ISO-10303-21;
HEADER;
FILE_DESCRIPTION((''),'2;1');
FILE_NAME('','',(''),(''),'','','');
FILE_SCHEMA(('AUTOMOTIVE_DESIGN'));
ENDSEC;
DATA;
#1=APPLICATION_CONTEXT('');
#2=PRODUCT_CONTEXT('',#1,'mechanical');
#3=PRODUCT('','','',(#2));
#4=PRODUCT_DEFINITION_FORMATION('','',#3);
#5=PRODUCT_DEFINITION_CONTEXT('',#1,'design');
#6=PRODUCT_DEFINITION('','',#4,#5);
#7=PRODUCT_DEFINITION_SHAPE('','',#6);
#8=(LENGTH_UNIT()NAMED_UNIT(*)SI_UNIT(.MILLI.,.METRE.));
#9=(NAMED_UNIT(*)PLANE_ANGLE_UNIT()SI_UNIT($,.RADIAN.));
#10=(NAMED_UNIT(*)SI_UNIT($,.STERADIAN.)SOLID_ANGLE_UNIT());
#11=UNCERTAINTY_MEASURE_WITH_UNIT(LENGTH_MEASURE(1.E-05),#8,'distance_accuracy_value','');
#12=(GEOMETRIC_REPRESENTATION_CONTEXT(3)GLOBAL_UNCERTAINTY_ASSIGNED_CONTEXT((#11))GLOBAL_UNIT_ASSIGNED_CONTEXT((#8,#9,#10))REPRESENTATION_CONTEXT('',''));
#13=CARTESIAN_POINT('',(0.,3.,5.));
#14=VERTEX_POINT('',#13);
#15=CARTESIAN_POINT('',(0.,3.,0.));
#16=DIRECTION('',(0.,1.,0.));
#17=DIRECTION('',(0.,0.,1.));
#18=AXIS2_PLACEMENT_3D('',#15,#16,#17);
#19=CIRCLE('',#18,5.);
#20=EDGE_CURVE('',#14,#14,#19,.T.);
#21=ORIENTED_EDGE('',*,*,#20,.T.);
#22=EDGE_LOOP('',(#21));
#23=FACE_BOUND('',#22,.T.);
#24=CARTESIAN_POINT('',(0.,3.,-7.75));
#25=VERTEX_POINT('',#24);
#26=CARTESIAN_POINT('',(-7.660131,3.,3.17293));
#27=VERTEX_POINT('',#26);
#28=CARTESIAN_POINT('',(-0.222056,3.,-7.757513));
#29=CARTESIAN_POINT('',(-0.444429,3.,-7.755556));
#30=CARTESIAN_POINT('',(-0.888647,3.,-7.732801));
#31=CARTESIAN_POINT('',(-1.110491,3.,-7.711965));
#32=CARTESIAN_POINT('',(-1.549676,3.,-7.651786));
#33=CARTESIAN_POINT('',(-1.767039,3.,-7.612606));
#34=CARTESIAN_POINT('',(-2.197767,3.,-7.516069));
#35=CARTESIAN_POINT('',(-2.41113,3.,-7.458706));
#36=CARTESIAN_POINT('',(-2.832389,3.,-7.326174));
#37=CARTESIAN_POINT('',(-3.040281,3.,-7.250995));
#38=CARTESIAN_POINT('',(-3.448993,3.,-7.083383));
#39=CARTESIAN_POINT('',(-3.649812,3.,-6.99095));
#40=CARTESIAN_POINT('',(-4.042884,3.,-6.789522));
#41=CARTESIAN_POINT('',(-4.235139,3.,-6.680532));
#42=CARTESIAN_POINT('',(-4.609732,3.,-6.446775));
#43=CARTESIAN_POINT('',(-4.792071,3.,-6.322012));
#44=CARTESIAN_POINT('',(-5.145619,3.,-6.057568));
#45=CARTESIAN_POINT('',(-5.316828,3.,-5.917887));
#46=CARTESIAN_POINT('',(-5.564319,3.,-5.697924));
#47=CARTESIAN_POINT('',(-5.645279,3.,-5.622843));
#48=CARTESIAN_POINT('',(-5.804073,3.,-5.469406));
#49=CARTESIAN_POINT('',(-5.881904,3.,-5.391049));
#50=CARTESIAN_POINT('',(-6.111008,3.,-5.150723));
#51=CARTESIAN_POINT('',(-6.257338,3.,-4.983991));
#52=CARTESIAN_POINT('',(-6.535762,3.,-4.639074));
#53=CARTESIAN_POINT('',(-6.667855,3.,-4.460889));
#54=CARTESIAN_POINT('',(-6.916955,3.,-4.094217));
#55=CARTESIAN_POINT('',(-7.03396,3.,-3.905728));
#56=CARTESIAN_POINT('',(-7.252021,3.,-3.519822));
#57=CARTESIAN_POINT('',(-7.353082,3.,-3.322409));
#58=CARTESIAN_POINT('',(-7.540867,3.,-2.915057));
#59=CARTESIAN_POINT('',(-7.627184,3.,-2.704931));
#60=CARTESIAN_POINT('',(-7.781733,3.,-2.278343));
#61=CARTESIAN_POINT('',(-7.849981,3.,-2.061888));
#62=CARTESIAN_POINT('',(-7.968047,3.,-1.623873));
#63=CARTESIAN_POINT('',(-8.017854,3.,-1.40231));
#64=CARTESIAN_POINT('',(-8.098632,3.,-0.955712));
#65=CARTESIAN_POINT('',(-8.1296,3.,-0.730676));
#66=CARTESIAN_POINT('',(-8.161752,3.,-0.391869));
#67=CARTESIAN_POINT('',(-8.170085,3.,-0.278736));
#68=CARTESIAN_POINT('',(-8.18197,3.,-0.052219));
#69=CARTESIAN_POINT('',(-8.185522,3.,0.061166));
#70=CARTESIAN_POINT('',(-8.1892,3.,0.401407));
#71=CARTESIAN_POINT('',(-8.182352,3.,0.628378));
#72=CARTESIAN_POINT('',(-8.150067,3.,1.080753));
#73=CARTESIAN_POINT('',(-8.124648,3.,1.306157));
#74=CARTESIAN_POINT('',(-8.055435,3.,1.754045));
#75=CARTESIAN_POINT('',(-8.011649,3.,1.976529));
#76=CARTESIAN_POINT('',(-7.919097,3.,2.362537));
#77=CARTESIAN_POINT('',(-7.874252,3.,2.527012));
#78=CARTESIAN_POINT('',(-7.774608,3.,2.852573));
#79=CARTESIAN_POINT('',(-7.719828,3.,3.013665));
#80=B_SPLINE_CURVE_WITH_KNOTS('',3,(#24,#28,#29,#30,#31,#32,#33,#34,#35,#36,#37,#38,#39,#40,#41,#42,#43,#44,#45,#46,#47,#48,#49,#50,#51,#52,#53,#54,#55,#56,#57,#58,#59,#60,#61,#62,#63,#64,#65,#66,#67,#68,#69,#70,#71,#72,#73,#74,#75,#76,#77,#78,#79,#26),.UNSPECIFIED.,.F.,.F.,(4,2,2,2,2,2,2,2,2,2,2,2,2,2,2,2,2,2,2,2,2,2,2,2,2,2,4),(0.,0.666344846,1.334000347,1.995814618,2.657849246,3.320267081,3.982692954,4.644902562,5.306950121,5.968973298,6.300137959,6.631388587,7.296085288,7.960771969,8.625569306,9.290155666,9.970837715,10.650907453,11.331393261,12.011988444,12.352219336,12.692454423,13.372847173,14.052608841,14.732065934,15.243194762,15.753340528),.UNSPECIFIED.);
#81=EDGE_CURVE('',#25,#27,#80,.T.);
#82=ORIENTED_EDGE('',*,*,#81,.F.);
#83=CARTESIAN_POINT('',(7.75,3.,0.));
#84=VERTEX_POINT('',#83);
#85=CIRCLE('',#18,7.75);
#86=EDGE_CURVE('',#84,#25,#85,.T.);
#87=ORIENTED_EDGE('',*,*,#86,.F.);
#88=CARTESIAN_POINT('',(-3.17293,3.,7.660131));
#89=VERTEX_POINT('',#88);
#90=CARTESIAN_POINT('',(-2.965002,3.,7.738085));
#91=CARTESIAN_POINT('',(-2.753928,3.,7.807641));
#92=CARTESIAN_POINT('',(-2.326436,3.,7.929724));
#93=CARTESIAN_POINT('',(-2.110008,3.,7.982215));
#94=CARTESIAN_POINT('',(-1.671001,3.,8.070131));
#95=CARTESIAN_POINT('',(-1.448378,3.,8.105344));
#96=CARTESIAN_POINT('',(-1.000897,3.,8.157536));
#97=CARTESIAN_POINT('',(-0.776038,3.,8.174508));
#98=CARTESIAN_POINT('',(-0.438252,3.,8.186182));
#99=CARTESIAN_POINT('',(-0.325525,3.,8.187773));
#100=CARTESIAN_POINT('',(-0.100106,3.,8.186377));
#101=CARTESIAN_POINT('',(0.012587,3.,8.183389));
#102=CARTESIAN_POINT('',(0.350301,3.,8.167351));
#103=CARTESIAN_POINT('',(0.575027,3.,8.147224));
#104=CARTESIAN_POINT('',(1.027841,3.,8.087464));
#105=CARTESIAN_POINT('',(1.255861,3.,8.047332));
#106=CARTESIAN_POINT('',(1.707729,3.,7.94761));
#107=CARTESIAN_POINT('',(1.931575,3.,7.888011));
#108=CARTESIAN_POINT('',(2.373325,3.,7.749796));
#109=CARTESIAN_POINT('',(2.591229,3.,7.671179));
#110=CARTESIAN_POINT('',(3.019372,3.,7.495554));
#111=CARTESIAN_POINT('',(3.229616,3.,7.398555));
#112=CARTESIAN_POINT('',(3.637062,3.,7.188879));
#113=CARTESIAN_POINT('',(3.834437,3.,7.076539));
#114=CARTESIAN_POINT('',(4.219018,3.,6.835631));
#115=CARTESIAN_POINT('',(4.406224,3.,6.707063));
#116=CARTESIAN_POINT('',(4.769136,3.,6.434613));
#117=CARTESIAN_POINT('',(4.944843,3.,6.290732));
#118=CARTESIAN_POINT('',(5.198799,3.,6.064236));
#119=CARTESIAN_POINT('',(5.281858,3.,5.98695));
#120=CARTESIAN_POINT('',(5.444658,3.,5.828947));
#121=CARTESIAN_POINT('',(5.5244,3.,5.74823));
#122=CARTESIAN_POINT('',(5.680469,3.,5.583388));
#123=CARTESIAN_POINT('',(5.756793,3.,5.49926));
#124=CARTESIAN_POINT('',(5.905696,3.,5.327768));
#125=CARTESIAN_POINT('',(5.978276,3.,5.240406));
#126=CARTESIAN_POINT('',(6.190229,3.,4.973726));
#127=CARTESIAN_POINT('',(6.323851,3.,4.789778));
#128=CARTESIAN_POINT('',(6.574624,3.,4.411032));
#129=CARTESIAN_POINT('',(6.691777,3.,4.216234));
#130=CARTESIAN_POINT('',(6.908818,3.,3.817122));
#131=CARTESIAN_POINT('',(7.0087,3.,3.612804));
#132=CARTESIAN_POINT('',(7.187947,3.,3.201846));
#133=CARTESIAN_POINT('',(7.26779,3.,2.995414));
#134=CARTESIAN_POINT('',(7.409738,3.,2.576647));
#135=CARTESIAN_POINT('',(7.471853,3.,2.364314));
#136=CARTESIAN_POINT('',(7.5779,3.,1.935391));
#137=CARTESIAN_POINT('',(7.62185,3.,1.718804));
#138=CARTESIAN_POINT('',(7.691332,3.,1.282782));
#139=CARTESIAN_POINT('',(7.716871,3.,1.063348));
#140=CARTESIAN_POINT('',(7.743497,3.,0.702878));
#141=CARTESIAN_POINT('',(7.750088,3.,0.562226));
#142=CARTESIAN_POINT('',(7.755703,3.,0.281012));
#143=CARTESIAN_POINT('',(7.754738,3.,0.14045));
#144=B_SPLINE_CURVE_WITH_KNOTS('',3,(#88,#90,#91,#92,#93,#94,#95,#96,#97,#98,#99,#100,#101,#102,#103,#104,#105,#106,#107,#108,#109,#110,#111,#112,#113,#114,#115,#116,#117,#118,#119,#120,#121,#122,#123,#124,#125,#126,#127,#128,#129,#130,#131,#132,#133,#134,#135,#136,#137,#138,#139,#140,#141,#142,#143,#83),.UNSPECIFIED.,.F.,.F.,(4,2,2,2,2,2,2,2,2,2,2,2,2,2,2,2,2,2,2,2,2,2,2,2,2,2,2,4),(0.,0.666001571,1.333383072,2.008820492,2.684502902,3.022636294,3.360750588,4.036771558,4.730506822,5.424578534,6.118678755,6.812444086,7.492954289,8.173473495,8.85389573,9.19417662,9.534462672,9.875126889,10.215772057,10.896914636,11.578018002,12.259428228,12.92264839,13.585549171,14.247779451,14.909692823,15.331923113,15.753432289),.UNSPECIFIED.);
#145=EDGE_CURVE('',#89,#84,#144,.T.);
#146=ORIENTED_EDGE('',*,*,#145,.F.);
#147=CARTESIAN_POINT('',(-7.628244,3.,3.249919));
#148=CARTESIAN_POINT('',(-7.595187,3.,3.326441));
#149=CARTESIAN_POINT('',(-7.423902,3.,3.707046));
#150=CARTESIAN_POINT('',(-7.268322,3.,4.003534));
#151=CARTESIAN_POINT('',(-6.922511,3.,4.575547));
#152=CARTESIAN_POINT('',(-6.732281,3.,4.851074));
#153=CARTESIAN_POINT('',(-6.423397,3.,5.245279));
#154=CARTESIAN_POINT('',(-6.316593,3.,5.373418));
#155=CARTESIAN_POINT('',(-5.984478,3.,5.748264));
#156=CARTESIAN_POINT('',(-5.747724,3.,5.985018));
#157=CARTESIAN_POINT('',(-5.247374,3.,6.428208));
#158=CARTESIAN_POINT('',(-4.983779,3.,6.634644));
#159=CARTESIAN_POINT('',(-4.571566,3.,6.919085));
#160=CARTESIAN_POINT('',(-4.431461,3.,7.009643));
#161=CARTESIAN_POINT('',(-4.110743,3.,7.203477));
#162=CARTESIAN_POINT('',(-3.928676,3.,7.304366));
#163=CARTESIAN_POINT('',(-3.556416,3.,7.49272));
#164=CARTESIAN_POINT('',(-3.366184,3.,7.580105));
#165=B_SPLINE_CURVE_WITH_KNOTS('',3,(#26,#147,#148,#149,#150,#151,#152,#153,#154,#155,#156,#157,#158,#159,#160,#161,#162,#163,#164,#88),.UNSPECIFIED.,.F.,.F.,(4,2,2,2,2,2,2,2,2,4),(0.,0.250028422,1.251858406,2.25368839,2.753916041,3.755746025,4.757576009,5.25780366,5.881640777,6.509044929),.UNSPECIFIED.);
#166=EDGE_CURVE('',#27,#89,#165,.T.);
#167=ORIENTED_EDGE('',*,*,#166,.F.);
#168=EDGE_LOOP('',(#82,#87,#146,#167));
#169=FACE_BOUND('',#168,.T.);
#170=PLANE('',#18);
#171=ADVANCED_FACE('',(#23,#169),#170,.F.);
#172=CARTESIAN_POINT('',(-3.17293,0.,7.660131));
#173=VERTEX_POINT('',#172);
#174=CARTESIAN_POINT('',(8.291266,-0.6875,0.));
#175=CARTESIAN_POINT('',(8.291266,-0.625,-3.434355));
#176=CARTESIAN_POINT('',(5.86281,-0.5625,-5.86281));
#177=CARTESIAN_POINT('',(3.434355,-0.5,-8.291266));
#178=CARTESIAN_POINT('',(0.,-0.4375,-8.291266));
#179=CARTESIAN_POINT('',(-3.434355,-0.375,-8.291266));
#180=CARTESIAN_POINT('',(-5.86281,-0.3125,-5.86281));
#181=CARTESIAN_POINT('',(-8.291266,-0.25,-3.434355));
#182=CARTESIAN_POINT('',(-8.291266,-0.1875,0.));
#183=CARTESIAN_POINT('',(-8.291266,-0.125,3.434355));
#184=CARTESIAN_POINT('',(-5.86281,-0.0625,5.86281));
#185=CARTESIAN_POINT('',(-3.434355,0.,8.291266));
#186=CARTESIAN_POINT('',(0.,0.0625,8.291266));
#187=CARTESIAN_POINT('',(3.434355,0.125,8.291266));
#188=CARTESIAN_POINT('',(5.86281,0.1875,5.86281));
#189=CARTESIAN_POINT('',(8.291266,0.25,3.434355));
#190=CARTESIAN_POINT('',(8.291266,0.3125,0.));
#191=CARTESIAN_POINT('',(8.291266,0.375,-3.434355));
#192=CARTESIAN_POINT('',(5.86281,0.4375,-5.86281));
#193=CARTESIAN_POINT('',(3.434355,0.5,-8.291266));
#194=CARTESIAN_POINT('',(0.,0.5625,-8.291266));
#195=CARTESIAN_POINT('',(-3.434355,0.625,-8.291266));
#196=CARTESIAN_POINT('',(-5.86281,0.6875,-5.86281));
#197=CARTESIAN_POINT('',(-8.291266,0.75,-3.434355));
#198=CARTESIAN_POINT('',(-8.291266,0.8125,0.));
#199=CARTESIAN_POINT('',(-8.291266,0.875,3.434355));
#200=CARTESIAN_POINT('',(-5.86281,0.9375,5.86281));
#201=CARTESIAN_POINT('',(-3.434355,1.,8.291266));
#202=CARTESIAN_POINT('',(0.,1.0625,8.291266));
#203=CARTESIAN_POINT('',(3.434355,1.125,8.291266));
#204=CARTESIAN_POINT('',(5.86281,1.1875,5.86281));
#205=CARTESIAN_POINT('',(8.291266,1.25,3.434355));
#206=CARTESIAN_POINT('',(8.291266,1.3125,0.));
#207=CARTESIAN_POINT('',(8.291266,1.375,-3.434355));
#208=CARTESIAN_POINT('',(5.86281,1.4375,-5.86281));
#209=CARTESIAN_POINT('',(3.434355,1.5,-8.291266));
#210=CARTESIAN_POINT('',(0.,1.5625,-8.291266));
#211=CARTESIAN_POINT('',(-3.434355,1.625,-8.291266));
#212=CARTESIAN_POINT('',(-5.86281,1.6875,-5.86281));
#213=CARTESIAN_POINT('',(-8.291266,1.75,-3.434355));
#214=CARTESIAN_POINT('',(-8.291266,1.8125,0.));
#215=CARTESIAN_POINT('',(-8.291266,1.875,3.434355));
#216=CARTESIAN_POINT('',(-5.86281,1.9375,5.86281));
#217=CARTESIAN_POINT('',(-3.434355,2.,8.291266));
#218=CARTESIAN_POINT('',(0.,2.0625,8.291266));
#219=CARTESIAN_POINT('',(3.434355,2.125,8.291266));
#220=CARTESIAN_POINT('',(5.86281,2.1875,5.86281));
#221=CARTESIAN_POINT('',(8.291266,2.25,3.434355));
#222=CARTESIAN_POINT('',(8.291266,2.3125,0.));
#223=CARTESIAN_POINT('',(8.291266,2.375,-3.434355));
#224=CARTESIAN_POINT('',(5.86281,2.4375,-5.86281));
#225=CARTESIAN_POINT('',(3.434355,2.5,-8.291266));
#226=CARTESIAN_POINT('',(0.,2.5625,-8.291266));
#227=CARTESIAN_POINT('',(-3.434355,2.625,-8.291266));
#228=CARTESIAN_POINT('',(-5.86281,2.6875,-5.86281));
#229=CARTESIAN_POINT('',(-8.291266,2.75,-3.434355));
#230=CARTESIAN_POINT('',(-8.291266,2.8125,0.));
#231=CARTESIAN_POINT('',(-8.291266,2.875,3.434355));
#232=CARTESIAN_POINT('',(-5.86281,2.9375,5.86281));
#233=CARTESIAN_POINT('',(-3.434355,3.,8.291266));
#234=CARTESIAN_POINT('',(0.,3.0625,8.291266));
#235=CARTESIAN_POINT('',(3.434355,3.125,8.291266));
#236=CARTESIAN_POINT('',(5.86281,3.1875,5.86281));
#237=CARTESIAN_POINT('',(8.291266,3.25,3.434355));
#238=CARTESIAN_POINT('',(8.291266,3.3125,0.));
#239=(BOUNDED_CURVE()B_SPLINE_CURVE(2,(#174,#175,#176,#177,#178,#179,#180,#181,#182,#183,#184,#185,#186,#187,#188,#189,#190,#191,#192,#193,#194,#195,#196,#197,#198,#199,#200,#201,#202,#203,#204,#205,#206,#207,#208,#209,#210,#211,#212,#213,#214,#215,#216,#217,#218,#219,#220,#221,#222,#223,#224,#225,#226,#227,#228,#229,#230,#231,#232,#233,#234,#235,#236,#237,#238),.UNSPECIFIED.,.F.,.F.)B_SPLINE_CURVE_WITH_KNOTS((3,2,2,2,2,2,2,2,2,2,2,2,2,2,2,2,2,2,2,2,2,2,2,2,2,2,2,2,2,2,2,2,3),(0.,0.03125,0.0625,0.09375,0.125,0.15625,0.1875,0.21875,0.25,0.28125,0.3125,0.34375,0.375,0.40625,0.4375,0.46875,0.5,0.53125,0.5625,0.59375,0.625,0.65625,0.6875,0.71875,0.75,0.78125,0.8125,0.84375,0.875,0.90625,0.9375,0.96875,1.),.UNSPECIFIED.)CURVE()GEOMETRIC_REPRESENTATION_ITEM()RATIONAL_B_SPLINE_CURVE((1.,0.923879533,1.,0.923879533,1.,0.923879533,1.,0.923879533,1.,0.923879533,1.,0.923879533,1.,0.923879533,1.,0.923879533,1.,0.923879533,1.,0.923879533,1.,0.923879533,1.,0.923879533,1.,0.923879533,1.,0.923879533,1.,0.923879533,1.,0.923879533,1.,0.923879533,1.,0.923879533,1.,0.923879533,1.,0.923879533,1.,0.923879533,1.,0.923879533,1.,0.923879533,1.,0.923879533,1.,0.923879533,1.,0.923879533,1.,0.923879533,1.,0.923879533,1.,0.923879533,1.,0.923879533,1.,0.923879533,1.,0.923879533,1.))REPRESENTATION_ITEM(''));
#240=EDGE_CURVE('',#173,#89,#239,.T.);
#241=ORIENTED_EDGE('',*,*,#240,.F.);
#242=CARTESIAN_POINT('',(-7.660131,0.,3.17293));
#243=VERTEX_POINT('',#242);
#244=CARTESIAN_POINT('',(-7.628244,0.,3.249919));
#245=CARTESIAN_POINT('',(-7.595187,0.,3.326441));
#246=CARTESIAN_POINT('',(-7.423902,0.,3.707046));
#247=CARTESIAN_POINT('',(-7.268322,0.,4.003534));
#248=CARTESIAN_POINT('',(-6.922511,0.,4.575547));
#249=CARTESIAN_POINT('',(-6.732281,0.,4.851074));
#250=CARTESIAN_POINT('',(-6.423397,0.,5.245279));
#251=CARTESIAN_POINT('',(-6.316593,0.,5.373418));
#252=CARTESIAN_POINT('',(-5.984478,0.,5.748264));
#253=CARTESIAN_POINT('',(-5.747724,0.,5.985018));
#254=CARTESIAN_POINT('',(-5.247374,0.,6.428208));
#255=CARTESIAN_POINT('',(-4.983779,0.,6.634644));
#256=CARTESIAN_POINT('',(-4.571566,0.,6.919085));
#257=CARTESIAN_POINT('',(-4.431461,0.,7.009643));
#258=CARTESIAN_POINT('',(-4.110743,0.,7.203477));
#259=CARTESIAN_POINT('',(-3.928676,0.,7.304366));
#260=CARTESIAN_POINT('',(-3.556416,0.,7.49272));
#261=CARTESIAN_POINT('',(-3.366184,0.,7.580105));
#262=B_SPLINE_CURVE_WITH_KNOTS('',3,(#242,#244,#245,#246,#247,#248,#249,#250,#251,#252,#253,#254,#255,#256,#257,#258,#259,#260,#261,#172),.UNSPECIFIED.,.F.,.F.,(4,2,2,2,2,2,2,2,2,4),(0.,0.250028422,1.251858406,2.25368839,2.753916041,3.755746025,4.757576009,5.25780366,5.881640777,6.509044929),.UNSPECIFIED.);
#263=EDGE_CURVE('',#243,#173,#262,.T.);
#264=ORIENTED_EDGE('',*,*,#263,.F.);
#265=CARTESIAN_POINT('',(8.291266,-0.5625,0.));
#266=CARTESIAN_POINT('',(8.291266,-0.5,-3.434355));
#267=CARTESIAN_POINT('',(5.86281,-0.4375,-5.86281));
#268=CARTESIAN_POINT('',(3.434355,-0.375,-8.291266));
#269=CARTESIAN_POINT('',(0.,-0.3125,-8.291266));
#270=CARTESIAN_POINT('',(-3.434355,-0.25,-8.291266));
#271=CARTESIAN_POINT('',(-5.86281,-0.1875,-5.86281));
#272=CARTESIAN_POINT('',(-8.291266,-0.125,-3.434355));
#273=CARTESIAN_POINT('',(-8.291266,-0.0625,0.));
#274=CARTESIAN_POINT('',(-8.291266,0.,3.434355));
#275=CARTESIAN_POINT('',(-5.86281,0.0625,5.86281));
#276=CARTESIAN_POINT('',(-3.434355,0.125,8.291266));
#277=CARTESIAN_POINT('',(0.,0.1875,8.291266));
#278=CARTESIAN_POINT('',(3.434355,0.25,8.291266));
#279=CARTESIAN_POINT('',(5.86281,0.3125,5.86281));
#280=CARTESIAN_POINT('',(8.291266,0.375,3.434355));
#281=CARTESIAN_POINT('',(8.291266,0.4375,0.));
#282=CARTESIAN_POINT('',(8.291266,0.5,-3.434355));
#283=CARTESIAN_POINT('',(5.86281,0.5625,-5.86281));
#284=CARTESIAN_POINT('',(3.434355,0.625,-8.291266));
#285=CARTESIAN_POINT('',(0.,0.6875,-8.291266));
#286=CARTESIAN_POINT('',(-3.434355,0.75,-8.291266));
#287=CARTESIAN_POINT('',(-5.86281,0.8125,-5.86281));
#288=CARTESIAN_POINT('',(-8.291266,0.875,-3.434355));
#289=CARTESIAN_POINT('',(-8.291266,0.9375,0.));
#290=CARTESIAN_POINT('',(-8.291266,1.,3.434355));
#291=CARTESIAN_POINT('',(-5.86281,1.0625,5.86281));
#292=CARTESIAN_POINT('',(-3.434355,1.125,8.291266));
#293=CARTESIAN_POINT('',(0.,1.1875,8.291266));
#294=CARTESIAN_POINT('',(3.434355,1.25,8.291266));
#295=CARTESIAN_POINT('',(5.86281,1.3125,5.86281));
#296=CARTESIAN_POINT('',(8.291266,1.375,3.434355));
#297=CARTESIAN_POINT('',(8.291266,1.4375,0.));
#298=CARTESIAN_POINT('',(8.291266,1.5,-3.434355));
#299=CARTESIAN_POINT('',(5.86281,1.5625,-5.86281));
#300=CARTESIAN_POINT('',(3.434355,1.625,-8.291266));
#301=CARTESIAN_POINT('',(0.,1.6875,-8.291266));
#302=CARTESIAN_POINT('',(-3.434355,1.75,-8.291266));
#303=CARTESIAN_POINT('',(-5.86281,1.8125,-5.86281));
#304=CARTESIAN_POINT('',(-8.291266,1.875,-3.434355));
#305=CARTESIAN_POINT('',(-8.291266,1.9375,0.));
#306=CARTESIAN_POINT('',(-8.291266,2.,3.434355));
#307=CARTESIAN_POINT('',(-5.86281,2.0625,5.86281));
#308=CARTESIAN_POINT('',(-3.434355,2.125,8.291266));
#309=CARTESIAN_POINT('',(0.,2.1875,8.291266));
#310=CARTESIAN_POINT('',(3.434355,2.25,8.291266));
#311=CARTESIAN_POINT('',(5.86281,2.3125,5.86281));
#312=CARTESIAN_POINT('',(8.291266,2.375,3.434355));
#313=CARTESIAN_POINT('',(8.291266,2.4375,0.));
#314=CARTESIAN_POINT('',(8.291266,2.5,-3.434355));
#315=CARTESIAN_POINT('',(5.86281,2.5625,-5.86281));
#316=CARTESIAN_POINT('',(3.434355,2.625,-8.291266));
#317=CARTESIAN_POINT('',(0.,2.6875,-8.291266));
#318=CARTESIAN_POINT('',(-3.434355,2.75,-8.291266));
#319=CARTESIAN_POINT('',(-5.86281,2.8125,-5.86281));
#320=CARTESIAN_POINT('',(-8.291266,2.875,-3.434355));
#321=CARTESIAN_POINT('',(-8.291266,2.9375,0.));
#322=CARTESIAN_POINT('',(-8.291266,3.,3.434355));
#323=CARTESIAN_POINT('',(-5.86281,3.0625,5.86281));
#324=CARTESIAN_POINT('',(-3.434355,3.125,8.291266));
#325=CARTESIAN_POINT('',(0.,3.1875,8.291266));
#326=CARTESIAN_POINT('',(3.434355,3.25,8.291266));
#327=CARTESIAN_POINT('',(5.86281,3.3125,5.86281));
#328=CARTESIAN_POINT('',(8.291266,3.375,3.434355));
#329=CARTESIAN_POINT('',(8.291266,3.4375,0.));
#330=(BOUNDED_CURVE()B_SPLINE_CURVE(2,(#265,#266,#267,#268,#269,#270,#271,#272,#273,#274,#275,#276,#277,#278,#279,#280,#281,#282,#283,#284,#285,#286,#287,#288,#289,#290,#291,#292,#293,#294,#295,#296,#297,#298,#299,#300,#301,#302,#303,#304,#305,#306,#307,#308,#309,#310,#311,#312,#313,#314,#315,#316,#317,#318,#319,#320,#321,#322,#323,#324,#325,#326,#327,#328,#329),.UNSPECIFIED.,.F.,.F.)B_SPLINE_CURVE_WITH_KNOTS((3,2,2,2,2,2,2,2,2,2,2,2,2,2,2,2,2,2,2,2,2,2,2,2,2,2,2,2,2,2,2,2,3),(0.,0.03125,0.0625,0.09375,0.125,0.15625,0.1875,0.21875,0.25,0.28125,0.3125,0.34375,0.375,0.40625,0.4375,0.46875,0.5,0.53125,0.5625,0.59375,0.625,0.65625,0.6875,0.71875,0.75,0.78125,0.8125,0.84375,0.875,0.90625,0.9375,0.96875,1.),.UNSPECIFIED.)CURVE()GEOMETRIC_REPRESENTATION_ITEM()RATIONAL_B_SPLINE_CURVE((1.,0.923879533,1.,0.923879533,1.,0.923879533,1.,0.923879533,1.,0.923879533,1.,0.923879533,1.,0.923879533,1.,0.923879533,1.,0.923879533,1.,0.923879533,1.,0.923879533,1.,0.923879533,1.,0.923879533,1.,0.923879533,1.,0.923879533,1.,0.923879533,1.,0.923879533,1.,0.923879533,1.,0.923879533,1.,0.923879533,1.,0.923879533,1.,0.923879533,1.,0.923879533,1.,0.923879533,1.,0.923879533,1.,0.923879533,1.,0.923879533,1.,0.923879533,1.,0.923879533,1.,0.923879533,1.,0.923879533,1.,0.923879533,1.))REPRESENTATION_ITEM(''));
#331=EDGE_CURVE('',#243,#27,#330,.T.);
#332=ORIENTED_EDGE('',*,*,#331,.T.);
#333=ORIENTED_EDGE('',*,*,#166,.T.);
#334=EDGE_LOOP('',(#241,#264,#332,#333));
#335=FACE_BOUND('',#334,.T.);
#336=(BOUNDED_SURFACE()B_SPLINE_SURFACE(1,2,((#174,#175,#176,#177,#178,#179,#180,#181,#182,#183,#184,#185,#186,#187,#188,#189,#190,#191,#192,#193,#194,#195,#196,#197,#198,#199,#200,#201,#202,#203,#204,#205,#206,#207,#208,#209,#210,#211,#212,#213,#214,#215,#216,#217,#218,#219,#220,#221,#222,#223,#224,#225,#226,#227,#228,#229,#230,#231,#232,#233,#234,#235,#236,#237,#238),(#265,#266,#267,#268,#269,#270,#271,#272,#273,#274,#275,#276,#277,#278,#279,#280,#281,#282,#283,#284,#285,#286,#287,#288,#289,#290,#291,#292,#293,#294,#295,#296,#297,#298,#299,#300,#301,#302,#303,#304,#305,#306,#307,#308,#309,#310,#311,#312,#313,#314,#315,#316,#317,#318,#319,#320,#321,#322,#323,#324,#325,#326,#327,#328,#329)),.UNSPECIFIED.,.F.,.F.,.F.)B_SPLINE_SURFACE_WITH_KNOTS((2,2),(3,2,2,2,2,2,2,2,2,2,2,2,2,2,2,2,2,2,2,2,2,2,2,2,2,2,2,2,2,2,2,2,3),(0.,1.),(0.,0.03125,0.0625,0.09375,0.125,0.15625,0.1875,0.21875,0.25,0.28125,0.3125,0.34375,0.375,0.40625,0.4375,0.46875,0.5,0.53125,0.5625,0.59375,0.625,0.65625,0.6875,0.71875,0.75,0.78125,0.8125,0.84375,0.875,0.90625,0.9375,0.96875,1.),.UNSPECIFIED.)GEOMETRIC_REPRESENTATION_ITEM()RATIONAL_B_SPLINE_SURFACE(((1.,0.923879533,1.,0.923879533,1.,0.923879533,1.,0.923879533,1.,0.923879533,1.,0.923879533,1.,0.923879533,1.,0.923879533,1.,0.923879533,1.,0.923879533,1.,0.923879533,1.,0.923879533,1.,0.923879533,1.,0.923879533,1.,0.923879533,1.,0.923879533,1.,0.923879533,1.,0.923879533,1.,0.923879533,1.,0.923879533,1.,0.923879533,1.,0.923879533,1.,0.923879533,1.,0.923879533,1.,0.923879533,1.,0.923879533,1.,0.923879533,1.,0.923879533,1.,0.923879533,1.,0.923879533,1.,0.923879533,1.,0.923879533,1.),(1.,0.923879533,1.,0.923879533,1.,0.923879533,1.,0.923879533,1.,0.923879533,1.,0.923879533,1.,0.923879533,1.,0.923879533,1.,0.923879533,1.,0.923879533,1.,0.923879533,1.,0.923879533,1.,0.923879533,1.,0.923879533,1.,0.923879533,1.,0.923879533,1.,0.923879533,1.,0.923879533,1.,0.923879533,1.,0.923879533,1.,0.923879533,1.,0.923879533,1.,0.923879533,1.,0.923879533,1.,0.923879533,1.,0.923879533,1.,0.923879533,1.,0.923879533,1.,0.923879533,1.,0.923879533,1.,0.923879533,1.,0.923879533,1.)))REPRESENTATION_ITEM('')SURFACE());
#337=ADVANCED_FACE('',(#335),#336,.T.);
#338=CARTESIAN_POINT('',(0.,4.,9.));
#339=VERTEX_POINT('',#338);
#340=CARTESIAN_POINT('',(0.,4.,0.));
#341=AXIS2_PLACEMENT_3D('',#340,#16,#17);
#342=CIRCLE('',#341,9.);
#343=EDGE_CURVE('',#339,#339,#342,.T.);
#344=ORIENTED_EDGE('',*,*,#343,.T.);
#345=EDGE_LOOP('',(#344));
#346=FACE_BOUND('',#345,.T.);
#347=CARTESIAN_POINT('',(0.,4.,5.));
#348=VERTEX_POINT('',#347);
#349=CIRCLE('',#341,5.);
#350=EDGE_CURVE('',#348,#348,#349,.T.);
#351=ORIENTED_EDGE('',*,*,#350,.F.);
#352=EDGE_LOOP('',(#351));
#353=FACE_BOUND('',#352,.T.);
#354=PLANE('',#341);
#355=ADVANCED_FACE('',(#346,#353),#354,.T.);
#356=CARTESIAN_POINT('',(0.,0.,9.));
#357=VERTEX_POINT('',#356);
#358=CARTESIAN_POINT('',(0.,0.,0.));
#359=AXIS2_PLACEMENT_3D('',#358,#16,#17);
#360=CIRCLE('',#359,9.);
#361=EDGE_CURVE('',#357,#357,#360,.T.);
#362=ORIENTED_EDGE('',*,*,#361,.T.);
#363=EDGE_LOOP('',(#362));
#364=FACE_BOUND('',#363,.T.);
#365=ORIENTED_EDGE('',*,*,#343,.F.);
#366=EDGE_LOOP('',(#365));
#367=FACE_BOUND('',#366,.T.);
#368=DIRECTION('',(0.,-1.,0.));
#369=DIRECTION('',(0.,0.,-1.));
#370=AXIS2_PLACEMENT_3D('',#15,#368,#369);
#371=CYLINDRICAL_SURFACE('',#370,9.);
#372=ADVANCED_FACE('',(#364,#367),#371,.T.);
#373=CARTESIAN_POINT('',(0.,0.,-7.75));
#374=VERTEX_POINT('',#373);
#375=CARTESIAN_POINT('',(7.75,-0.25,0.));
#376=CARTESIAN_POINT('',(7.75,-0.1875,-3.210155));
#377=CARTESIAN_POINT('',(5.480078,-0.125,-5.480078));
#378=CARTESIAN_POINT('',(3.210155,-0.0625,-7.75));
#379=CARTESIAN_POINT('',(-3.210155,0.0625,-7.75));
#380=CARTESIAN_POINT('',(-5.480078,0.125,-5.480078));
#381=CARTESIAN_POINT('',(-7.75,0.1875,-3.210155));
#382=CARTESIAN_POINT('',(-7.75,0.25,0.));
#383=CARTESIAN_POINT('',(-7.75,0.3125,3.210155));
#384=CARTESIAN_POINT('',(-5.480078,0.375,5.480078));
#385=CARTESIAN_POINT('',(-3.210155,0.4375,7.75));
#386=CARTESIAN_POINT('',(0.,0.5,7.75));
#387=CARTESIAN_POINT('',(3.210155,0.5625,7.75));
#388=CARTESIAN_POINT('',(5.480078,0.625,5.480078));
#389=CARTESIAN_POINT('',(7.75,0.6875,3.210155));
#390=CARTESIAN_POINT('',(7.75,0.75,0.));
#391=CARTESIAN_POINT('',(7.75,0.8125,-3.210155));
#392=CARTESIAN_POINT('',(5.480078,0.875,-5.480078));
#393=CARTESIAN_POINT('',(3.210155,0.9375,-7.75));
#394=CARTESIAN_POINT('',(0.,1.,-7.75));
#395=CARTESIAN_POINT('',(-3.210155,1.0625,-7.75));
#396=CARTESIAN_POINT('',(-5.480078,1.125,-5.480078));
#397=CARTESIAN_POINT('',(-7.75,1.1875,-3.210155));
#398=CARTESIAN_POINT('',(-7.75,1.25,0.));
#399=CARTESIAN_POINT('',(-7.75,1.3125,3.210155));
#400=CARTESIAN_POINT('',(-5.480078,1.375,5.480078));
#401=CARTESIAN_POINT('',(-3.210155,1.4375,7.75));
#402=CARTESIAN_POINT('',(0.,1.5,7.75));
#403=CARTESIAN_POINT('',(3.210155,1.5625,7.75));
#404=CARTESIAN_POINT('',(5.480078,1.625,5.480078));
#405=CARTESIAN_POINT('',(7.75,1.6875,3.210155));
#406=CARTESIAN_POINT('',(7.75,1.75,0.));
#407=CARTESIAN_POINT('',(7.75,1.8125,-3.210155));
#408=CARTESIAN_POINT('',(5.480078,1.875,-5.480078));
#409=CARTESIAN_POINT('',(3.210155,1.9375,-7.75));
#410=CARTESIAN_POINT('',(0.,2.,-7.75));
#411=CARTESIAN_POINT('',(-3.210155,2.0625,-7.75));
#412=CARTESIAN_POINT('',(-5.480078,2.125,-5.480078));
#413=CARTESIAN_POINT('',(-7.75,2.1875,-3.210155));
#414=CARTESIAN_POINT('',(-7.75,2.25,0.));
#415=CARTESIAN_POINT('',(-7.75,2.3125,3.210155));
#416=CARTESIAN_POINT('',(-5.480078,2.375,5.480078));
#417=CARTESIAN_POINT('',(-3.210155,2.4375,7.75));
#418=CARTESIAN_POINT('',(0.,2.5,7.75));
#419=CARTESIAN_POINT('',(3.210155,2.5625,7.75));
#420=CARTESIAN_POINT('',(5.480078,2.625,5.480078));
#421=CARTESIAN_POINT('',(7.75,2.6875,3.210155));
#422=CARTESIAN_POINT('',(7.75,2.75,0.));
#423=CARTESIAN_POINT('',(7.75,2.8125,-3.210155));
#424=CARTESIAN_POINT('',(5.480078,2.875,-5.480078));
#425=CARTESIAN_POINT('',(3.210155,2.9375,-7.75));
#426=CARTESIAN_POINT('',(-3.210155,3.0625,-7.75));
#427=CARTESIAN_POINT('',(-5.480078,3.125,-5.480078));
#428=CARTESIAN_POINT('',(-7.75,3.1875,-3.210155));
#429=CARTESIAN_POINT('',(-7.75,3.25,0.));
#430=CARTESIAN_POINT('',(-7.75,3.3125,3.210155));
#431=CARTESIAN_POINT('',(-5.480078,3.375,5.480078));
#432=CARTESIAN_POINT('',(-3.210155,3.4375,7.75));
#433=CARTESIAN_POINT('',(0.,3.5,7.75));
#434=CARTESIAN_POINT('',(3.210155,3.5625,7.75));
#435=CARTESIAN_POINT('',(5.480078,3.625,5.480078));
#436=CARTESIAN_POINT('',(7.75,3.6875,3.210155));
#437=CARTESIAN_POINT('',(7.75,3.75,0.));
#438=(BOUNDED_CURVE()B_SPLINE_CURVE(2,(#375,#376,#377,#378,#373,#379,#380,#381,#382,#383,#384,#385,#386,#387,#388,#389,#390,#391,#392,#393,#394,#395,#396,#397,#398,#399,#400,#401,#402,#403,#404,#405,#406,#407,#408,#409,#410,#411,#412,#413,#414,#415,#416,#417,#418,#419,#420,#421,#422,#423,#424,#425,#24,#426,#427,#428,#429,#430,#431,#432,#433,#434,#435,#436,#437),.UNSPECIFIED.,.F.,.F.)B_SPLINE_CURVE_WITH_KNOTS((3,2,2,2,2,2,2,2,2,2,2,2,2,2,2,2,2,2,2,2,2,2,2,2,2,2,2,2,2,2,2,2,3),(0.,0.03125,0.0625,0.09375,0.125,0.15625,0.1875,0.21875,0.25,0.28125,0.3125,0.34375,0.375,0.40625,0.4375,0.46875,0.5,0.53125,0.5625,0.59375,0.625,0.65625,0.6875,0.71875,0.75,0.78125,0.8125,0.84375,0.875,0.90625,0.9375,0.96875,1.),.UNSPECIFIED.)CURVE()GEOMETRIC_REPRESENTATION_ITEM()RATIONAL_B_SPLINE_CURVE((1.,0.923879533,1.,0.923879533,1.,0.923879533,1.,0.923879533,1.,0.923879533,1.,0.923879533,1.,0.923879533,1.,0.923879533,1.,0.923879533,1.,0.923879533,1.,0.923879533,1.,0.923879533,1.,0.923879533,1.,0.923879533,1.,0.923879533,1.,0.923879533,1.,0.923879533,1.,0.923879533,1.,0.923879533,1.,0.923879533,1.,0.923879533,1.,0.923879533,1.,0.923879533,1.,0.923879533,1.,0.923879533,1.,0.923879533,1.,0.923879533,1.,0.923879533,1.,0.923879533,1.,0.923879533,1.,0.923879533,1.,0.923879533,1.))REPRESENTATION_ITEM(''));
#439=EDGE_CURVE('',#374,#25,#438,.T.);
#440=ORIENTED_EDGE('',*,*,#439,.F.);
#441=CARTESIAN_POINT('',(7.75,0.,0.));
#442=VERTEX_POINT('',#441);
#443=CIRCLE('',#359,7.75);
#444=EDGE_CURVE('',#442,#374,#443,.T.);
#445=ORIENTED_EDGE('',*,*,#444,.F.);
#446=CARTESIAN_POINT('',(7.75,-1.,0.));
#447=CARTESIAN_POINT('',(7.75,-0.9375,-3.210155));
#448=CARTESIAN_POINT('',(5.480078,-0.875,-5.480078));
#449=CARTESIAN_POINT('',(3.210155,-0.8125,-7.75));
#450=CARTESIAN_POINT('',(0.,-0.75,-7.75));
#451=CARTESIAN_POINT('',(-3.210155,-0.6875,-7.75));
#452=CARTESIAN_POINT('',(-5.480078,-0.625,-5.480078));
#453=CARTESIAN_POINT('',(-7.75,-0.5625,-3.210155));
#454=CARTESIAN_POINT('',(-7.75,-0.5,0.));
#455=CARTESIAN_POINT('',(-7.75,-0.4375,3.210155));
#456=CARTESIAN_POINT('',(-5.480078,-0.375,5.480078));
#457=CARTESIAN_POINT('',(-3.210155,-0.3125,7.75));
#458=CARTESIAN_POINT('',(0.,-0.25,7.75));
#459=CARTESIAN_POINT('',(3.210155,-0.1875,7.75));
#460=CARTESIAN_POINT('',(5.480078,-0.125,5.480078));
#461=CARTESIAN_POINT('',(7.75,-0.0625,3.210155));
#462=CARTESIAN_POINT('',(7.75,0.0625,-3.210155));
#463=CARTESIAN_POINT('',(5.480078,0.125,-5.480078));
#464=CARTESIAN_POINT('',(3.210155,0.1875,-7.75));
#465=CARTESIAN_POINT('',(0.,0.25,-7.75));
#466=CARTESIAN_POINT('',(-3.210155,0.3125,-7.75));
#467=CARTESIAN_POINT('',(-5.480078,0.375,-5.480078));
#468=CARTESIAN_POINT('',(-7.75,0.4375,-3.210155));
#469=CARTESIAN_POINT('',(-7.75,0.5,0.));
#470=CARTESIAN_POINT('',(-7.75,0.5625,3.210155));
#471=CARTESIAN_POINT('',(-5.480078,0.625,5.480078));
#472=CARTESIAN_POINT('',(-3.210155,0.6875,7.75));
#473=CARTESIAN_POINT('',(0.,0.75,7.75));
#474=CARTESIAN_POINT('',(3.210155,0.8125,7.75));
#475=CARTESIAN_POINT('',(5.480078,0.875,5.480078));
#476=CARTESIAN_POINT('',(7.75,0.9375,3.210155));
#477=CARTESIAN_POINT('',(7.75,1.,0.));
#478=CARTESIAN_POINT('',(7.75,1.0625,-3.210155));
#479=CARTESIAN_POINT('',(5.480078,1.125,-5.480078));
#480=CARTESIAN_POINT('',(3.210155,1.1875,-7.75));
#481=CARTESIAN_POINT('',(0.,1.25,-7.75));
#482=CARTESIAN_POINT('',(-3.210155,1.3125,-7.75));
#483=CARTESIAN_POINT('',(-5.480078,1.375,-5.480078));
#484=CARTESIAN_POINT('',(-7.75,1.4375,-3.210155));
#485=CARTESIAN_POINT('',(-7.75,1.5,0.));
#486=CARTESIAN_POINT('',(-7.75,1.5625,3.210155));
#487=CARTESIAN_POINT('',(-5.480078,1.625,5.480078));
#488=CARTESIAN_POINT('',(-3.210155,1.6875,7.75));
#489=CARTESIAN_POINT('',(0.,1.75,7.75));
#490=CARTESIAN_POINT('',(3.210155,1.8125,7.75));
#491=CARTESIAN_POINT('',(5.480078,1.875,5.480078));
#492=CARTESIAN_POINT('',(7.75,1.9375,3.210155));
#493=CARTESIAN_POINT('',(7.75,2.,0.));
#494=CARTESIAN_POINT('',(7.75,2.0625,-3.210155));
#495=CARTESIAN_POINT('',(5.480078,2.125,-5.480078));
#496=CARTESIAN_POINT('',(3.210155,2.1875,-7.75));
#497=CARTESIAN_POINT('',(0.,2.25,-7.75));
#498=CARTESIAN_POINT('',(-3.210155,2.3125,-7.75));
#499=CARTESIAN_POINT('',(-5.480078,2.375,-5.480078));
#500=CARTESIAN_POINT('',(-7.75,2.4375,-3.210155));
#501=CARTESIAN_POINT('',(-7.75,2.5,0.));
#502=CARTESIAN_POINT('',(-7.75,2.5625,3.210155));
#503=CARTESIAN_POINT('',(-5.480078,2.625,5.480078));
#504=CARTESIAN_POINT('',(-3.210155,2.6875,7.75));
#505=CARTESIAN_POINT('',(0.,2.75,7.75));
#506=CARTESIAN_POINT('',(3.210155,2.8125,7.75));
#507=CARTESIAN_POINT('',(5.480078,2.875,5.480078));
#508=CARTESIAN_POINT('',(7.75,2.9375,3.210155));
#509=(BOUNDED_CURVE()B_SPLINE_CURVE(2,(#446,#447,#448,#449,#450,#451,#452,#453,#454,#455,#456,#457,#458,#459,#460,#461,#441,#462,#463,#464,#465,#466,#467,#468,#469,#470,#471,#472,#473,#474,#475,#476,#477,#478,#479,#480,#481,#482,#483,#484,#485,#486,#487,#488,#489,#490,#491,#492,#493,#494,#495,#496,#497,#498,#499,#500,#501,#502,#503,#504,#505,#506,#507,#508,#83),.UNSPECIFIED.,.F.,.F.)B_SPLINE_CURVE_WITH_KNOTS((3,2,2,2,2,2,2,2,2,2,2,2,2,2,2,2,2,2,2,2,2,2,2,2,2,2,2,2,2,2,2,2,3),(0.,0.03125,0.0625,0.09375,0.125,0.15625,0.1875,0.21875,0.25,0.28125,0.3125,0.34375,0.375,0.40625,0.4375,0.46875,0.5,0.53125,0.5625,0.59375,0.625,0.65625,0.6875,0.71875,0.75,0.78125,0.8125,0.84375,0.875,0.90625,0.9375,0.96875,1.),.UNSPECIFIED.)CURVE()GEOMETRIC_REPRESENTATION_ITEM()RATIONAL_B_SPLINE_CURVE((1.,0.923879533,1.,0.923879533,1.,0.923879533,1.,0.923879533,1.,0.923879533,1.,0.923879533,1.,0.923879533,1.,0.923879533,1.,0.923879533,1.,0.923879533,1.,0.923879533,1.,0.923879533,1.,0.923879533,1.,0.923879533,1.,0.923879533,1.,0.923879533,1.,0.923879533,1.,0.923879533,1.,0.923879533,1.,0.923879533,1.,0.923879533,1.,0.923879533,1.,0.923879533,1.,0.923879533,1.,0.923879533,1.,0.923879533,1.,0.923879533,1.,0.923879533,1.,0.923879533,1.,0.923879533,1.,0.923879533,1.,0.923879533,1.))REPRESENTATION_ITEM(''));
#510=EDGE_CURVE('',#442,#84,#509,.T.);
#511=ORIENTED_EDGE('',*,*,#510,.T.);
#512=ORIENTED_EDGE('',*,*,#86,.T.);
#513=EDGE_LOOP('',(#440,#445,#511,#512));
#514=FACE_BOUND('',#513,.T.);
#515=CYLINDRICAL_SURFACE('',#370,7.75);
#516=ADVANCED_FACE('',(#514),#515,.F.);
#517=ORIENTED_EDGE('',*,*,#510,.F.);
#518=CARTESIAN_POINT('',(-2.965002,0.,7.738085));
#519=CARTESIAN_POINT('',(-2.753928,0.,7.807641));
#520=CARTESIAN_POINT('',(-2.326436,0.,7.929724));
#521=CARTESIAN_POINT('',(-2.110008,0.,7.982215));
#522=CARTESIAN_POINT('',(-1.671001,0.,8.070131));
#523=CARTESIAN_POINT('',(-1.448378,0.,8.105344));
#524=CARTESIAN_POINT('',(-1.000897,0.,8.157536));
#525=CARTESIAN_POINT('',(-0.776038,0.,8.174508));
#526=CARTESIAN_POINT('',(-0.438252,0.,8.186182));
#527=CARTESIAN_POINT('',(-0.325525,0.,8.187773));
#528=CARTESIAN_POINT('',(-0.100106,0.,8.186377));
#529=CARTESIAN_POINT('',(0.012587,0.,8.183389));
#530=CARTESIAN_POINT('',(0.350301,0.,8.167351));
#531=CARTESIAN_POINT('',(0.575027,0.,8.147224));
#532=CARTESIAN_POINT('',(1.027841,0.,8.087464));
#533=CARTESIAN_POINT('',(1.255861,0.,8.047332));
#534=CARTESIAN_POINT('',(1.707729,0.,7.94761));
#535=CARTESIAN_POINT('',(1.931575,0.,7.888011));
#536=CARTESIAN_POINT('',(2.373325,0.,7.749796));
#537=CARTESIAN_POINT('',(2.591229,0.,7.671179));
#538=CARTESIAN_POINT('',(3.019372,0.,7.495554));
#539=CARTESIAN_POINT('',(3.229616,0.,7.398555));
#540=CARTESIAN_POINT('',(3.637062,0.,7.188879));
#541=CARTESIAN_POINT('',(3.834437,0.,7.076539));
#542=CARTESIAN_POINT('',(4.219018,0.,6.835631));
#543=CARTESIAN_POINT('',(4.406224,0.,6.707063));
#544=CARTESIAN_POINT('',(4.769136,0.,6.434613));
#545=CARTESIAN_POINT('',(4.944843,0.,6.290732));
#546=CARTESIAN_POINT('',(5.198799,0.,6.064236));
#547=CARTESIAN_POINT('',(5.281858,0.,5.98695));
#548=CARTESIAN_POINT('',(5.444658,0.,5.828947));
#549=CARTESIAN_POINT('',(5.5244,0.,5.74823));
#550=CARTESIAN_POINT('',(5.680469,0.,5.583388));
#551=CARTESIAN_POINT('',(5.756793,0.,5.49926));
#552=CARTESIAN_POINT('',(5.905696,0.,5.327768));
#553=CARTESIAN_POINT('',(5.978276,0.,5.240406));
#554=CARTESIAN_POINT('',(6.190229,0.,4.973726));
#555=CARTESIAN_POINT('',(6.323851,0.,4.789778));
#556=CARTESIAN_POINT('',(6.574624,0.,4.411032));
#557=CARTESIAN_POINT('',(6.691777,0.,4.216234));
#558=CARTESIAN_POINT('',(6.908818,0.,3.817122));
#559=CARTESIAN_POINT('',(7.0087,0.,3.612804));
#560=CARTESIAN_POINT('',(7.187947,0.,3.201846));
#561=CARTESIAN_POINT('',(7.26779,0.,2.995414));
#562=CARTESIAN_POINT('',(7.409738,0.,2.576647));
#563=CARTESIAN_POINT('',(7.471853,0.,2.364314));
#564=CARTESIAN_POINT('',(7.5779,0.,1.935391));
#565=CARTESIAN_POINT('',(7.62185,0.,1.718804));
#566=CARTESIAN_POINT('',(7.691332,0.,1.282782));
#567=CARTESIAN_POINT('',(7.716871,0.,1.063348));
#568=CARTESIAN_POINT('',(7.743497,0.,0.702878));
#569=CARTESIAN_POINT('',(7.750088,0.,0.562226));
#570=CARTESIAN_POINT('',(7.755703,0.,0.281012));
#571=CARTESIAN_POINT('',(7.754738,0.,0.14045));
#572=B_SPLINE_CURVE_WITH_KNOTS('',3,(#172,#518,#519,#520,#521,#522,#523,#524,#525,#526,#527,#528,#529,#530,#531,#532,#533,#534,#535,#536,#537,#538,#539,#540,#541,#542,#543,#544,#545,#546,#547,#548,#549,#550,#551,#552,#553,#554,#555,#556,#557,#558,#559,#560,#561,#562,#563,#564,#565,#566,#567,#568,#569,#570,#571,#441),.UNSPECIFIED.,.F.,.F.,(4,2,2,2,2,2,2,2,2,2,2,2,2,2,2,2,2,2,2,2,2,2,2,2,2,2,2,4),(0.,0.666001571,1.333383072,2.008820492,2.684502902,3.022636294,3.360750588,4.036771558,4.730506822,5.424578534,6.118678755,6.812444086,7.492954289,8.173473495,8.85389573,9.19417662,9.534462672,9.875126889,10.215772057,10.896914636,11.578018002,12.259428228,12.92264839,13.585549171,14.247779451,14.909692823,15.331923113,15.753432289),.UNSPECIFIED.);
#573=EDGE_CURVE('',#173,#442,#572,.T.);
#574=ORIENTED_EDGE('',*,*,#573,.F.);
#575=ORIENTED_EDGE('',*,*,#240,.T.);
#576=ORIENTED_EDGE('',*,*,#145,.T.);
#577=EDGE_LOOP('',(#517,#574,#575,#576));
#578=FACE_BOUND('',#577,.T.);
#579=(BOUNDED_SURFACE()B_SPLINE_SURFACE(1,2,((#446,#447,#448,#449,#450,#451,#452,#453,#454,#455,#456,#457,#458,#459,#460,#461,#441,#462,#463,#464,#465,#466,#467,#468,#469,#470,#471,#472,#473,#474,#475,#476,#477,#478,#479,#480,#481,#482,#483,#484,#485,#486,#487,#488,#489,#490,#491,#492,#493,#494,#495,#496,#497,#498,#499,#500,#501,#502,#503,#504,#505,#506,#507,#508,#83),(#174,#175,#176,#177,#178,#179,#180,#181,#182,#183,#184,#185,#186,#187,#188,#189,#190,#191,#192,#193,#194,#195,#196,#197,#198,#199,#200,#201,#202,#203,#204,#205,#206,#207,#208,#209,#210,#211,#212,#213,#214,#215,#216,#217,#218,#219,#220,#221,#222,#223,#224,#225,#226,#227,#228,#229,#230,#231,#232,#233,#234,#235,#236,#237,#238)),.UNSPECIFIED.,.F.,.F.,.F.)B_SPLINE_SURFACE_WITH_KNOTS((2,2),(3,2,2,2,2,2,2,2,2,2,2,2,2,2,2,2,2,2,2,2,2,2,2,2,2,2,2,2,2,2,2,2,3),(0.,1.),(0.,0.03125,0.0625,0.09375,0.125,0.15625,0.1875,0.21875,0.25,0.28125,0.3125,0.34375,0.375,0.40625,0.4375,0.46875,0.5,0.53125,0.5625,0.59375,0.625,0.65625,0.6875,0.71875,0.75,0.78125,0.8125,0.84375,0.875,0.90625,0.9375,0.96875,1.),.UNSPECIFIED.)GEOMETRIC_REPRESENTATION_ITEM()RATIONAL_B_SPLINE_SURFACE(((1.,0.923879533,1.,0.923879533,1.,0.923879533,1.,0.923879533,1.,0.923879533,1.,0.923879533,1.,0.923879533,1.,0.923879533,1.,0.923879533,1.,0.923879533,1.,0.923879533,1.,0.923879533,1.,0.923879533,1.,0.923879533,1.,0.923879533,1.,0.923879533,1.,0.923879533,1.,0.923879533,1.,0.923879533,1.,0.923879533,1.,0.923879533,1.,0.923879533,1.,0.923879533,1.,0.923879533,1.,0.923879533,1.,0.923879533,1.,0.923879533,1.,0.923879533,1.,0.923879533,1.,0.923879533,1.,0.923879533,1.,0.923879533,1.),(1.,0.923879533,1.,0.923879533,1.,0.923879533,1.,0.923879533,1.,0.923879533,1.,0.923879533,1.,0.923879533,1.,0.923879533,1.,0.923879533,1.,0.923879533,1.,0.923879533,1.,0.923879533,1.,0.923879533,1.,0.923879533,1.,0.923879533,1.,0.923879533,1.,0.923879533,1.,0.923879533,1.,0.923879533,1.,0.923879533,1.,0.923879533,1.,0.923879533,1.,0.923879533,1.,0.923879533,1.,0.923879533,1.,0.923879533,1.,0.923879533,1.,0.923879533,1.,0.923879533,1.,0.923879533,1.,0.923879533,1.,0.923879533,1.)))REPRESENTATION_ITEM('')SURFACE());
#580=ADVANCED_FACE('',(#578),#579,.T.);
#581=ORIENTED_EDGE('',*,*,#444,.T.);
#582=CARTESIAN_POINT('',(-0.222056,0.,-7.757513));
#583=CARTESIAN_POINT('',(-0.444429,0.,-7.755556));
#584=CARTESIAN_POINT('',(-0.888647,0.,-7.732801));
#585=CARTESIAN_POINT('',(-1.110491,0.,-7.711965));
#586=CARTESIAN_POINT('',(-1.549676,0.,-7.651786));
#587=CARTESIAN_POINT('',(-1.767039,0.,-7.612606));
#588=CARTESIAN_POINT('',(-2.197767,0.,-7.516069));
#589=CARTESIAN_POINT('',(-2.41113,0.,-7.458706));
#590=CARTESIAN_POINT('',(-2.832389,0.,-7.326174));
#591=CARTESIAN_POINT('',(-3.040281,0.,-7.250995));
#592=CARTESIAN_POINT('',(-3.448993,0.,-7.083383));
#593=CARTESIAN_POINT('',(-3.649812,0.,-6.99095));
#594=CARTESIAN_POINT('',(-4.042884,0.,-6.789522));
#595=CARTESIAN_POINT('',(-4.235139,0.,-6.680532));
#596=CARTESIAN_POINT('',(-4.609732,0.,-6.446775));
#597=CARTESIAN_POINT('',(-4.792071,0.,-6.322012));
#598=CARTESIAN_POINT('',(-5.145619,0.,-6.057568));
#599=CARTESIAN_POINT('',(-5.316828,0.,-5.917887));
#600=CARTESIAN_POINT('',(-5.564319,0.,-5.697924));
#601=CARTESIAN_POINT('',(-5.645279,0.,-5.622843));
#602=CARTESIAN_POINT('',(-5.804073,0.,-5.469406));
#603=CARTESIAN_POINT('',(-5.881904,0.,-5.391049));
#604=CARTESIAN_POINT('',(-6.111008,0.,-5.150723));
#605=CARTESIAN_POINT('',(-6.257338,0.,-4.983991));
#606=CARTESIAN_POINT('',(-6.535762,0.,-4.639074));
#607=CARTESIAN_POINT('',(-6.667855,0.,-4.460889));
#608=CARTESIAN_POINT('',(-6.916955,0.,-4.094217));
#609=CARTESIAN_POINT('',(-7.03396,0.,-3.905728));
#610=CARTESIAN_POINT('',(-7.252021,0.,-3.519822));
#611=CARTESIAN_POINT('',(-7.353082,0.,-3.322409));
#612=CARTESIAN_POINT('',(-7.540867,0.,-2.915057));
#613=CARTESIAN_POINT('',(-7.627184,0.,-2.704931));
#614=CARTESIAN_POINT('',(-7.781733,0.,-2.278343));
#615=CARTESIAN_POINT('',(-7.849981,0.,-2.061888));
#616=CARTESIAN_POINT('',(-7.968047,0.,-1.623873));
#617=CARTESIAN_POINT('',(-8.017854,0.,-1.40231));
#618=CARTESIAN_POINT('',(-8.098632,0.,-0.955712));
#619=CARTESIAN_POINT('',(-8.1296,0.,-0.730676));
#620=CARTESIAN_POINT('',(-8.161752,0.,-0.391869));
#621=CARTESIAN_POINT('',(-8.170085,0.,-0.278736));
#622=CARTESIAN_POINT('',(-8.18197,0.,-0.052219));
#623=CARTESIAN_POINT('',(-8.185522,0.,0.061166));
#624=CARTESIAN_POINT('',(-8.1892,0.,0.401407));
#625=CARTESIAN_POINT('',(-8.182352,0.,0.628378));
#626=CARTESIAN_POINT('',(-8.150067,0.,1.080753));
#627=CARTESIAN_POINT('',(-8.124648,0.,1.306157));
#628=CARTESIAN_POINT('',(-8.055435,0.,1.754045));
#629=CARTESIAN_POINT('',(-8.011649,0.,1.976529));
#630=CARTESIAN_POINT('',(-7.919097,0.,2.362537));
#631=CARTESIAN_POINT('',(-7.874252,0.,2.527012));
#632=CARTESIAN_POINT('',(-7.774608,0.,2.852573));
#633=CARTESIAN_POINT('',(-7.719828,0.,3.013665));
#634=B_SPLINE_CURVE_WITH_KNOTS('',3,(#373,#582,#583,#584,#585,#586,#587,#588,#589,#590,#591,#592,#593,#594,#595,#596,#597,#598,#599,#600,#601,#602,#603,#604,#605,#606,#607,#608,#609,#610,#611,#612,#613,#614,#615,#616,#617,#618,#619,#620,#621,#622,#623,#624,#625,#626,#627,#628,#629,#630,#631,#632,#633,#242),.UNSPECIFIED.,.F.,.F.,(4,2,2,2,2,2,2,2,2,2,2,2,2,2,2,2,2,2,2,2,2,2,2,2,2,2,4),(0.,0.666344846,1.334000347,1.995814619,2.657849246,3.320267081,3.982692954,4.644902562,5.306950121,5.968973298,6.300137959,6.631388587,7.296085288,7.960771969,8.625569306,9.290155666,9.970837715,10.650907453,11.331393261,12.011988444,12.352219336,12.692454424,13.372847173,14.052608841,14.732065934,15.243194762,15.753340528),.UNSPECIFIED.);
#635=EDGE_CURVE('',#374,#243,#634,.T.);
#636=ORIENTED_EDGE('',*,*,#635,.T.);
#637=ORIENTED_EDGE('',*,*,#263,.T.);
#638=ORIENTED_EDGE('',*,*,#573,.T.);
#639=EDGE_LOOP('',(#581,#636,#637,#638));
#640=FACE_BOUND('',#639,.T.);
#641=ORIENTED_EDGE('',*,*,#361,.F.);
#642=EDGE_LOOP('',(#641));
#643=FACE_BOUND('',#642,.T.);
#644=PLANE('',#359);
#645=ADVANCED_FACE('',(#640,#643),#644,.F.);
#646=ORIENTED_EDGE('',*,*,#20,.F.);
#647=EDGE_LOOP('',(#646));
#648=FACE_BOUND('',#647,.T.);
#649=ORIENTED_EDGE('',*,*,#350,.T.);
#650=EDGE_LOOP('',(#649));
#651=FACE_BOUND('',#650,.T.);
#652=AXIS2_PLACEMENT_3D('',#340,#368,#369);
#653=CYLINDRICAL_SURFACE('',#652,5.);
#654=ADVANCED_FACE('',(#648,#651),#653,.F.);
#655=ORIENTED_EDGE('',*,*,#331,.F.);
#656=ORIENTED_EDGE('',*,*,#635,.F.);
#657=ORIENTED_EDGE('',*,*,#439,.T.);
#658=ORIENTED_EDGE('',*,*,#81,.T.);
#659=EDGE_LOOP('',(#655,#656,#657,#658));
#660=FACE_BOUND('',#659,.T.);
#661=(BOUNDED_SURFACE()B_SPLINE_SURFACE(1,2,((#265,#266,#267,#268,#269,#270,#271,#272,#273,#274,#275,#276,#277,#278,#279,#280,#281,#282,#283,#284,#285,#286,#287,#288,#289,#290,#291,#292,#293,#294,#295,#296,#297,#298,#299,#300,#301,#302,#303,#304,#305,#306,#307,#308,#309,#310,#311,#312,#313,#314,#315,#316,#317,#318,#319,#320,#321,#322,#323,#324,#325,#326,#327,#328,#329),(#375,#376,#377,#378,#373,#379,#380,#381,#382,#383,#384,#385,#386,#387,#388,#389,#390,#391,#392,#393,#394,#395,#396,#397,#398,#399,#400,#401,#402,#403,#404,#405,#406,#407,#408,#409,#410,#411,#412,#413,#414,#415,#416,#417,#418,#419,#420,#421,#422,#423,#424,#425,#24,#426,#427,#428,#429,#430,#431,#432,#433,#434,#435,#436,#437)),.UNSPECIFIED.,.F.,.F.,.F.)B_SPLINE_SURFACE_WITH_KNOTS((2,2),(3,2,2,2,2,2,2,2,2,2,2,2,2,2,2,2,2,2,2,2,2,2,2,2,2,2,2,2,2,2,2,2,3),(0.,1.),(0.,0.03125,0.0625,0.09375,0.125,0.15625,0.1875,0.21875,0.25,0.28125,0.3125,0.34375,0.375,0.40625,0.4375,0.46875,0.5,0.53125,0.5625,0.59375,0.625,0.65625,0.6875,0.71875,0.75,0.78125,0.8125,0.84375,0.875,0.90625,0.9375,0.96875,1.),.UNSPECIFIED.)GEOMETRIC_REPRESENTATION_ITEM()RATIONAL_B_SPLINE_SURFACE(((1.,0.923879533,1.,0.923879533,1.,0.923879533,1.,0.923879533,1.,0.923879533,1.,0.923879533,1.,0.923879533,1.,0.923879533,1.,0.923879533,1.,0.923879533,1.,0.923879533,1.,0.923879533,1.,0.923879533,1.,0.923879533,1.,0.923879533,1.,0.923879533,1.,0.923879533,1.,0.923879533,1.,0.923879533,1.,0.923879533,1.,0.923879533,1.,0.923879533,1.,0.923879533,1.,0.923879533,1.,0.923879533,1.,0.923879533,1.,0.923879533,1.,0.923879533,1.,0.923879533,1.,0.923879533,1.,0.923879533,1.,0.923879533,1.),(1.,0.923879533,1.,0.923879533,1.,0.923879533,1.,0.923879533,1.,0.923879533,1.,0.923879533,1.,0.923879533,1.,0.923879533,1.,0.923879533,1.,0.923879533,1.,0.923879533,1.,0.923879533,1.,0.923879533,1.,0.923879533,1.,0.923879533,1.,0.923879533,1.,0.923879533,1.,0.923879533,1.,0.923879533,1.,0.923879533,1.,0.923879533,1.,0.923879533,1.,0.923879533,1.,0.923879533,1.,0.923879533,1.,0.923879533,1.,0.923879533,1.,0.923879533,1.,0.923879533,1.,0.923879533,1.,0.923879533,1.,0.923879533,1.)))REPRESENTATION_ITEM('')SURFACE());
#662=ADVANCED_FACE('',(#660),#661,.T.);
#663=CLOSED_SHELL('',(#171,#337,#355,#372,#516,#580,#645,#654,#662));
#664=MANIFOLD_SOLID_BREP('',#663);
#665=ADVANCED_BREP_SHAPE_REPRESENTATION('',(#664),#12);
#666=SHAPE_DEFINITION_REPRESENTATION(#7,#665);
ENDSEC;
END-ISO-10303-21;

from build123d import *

# Parameters (mm, degrees)
SKETCH1_R           = 9
SKETCH1_R_2         = 7.75
BOSS_EXTRUDE1_DEPTH = 3
SKETCH2_R           = 9
SKETCH2_R_2         = 5
BOSS_EXTRUDE2_DEPTH = 1
THREAD2_PITCH       = 1
THREAD2_TO          = 4


with BuildPart() as part:
    # Sketch1 → Boss-Extrude1 (new body)
    with BuildSketch(Plane(origin=(0, 0, 0), x_dir=(1, 0, 0), z_dir=(0, 1, 0))):
        with Locations(Location((0, 0, 0), (0, 0, 270))):
            Circle(SKETCH1_R)
        with Locations(Location((0, 0, 0), (0, 0, 270))):
            Circle(SKETCH1_R_2, mode=Mode.SUBTRACT)
    extrude(amount=BOSS_EXTRUDE1_DEPTH)

    # Sketch2 → Boss-Extrude2 (add)
    with BuildSketch(Plane(origin=(0, 3, 0), x_dir=(1, 0, 0), z_dir=(0, 1, 0))):
        with Locations(Location((0, 0, 0), (0, 0, 270))):
            Circle(SKETCH2_R)
        with Locations(Location((0, 0, 0), (0, 0, 270))):
            Circle(SKETCH2_R_2, mode=Mode.SUBTRACT)
    extrude(amount=BOSS_EXTRUDE2_DEPTH)

    # Thread2: arcs per turn and ends read off the stored shape
    # Thread2: the profile of Thread Profile2 profile screwed along a right-hand helix through 4 turns, 8 arcs to a turn; built about Z, then put on its axis
    thread2_z = Axis((0, 0, 0), (0, 0, 1))
    thread2_corners = [(7.7497, 0, -0.000173205), (8.291265875, 0, 0.312499999), (8.291265875, 0, 0.437499999), (7.7497, 0, 0.750173202)]
    with BuildLine(mode=Mode.PRIVATE) as thread2_profile:
        Line(thread2_corners[0], thread2_corners[1])
        Line(thread2_corners[1], thread2_corners[2])
        Line(thread2_corners[2], thread2_corners[3])
        Line(thread2_corners[3], thread2_corners[0])
    thread2_cap = Face(thread2_profile.wire())
    thread2_turn_angles = [0, 22.5, 45, 67.5, 90, 112.5, 135, 157.5, 180, 202.5, 225, 247.5, 270, 292.5, 315, 337.5, 360]
    thread2_turn_weights = [1, 0.9238795325112867, 1, 0.9238795325112867, 1, 0.9238795325112867, 1, 0.9238795325112867, 1, 0.9238795325112867, 1, 0.9238795325112867, 1, 0.9238795325112867, 1, 0.9238795325112867, 1]
    thread2_turn_rails = [Edge.make_bspline([Vector(p[0], p[1], 0).rotate(thread2_z, thread2_turn_angles[k]) / thread2_turn_weights[k] + Vector(0, 0, p[2] + THREAD2_PITCH * thread2_turn_angles[k] / 360) for k in range(17)], [0, 0, 0, 1, 1, 2, 2, 3, 3, 4, 4, 5, 5, 6, 6, 7, 7, 8, 8, 8], 2, thread2_turn_weights) for p in thread2_corners]
    thread2_turn_sides = [Face.make_surface_from_curves(thread2_turn_rails[p[0]], thread2_turn_rails[p[1]]) for p in [(0, 1), (1, 2), (2, 3), (3, 0)]]
    thread2 = Plane(origin=(0, -1, 0), x_dir=(1, 0, 0), z_dir=(0, 1, 0)) * split(Solid(Shell([*[p.moved(Location((0, 0, THREAD2_PITCH * i))) for i in range(4) for p in thread2_turn_sides], thread2_cap, thread2_cap.rotate(thread2_z, 1440).moved(Location((0, 0, THREAD2_PITCH * 1440 / 360)))])), bisect_by=Plane.XY.offset(THREAD2_TO), keep=Keep.BOTTOM, mode=Mode.PRIVATE)
    add(thread2, mode=Mode.SUBTRACT)


solid = part.part
